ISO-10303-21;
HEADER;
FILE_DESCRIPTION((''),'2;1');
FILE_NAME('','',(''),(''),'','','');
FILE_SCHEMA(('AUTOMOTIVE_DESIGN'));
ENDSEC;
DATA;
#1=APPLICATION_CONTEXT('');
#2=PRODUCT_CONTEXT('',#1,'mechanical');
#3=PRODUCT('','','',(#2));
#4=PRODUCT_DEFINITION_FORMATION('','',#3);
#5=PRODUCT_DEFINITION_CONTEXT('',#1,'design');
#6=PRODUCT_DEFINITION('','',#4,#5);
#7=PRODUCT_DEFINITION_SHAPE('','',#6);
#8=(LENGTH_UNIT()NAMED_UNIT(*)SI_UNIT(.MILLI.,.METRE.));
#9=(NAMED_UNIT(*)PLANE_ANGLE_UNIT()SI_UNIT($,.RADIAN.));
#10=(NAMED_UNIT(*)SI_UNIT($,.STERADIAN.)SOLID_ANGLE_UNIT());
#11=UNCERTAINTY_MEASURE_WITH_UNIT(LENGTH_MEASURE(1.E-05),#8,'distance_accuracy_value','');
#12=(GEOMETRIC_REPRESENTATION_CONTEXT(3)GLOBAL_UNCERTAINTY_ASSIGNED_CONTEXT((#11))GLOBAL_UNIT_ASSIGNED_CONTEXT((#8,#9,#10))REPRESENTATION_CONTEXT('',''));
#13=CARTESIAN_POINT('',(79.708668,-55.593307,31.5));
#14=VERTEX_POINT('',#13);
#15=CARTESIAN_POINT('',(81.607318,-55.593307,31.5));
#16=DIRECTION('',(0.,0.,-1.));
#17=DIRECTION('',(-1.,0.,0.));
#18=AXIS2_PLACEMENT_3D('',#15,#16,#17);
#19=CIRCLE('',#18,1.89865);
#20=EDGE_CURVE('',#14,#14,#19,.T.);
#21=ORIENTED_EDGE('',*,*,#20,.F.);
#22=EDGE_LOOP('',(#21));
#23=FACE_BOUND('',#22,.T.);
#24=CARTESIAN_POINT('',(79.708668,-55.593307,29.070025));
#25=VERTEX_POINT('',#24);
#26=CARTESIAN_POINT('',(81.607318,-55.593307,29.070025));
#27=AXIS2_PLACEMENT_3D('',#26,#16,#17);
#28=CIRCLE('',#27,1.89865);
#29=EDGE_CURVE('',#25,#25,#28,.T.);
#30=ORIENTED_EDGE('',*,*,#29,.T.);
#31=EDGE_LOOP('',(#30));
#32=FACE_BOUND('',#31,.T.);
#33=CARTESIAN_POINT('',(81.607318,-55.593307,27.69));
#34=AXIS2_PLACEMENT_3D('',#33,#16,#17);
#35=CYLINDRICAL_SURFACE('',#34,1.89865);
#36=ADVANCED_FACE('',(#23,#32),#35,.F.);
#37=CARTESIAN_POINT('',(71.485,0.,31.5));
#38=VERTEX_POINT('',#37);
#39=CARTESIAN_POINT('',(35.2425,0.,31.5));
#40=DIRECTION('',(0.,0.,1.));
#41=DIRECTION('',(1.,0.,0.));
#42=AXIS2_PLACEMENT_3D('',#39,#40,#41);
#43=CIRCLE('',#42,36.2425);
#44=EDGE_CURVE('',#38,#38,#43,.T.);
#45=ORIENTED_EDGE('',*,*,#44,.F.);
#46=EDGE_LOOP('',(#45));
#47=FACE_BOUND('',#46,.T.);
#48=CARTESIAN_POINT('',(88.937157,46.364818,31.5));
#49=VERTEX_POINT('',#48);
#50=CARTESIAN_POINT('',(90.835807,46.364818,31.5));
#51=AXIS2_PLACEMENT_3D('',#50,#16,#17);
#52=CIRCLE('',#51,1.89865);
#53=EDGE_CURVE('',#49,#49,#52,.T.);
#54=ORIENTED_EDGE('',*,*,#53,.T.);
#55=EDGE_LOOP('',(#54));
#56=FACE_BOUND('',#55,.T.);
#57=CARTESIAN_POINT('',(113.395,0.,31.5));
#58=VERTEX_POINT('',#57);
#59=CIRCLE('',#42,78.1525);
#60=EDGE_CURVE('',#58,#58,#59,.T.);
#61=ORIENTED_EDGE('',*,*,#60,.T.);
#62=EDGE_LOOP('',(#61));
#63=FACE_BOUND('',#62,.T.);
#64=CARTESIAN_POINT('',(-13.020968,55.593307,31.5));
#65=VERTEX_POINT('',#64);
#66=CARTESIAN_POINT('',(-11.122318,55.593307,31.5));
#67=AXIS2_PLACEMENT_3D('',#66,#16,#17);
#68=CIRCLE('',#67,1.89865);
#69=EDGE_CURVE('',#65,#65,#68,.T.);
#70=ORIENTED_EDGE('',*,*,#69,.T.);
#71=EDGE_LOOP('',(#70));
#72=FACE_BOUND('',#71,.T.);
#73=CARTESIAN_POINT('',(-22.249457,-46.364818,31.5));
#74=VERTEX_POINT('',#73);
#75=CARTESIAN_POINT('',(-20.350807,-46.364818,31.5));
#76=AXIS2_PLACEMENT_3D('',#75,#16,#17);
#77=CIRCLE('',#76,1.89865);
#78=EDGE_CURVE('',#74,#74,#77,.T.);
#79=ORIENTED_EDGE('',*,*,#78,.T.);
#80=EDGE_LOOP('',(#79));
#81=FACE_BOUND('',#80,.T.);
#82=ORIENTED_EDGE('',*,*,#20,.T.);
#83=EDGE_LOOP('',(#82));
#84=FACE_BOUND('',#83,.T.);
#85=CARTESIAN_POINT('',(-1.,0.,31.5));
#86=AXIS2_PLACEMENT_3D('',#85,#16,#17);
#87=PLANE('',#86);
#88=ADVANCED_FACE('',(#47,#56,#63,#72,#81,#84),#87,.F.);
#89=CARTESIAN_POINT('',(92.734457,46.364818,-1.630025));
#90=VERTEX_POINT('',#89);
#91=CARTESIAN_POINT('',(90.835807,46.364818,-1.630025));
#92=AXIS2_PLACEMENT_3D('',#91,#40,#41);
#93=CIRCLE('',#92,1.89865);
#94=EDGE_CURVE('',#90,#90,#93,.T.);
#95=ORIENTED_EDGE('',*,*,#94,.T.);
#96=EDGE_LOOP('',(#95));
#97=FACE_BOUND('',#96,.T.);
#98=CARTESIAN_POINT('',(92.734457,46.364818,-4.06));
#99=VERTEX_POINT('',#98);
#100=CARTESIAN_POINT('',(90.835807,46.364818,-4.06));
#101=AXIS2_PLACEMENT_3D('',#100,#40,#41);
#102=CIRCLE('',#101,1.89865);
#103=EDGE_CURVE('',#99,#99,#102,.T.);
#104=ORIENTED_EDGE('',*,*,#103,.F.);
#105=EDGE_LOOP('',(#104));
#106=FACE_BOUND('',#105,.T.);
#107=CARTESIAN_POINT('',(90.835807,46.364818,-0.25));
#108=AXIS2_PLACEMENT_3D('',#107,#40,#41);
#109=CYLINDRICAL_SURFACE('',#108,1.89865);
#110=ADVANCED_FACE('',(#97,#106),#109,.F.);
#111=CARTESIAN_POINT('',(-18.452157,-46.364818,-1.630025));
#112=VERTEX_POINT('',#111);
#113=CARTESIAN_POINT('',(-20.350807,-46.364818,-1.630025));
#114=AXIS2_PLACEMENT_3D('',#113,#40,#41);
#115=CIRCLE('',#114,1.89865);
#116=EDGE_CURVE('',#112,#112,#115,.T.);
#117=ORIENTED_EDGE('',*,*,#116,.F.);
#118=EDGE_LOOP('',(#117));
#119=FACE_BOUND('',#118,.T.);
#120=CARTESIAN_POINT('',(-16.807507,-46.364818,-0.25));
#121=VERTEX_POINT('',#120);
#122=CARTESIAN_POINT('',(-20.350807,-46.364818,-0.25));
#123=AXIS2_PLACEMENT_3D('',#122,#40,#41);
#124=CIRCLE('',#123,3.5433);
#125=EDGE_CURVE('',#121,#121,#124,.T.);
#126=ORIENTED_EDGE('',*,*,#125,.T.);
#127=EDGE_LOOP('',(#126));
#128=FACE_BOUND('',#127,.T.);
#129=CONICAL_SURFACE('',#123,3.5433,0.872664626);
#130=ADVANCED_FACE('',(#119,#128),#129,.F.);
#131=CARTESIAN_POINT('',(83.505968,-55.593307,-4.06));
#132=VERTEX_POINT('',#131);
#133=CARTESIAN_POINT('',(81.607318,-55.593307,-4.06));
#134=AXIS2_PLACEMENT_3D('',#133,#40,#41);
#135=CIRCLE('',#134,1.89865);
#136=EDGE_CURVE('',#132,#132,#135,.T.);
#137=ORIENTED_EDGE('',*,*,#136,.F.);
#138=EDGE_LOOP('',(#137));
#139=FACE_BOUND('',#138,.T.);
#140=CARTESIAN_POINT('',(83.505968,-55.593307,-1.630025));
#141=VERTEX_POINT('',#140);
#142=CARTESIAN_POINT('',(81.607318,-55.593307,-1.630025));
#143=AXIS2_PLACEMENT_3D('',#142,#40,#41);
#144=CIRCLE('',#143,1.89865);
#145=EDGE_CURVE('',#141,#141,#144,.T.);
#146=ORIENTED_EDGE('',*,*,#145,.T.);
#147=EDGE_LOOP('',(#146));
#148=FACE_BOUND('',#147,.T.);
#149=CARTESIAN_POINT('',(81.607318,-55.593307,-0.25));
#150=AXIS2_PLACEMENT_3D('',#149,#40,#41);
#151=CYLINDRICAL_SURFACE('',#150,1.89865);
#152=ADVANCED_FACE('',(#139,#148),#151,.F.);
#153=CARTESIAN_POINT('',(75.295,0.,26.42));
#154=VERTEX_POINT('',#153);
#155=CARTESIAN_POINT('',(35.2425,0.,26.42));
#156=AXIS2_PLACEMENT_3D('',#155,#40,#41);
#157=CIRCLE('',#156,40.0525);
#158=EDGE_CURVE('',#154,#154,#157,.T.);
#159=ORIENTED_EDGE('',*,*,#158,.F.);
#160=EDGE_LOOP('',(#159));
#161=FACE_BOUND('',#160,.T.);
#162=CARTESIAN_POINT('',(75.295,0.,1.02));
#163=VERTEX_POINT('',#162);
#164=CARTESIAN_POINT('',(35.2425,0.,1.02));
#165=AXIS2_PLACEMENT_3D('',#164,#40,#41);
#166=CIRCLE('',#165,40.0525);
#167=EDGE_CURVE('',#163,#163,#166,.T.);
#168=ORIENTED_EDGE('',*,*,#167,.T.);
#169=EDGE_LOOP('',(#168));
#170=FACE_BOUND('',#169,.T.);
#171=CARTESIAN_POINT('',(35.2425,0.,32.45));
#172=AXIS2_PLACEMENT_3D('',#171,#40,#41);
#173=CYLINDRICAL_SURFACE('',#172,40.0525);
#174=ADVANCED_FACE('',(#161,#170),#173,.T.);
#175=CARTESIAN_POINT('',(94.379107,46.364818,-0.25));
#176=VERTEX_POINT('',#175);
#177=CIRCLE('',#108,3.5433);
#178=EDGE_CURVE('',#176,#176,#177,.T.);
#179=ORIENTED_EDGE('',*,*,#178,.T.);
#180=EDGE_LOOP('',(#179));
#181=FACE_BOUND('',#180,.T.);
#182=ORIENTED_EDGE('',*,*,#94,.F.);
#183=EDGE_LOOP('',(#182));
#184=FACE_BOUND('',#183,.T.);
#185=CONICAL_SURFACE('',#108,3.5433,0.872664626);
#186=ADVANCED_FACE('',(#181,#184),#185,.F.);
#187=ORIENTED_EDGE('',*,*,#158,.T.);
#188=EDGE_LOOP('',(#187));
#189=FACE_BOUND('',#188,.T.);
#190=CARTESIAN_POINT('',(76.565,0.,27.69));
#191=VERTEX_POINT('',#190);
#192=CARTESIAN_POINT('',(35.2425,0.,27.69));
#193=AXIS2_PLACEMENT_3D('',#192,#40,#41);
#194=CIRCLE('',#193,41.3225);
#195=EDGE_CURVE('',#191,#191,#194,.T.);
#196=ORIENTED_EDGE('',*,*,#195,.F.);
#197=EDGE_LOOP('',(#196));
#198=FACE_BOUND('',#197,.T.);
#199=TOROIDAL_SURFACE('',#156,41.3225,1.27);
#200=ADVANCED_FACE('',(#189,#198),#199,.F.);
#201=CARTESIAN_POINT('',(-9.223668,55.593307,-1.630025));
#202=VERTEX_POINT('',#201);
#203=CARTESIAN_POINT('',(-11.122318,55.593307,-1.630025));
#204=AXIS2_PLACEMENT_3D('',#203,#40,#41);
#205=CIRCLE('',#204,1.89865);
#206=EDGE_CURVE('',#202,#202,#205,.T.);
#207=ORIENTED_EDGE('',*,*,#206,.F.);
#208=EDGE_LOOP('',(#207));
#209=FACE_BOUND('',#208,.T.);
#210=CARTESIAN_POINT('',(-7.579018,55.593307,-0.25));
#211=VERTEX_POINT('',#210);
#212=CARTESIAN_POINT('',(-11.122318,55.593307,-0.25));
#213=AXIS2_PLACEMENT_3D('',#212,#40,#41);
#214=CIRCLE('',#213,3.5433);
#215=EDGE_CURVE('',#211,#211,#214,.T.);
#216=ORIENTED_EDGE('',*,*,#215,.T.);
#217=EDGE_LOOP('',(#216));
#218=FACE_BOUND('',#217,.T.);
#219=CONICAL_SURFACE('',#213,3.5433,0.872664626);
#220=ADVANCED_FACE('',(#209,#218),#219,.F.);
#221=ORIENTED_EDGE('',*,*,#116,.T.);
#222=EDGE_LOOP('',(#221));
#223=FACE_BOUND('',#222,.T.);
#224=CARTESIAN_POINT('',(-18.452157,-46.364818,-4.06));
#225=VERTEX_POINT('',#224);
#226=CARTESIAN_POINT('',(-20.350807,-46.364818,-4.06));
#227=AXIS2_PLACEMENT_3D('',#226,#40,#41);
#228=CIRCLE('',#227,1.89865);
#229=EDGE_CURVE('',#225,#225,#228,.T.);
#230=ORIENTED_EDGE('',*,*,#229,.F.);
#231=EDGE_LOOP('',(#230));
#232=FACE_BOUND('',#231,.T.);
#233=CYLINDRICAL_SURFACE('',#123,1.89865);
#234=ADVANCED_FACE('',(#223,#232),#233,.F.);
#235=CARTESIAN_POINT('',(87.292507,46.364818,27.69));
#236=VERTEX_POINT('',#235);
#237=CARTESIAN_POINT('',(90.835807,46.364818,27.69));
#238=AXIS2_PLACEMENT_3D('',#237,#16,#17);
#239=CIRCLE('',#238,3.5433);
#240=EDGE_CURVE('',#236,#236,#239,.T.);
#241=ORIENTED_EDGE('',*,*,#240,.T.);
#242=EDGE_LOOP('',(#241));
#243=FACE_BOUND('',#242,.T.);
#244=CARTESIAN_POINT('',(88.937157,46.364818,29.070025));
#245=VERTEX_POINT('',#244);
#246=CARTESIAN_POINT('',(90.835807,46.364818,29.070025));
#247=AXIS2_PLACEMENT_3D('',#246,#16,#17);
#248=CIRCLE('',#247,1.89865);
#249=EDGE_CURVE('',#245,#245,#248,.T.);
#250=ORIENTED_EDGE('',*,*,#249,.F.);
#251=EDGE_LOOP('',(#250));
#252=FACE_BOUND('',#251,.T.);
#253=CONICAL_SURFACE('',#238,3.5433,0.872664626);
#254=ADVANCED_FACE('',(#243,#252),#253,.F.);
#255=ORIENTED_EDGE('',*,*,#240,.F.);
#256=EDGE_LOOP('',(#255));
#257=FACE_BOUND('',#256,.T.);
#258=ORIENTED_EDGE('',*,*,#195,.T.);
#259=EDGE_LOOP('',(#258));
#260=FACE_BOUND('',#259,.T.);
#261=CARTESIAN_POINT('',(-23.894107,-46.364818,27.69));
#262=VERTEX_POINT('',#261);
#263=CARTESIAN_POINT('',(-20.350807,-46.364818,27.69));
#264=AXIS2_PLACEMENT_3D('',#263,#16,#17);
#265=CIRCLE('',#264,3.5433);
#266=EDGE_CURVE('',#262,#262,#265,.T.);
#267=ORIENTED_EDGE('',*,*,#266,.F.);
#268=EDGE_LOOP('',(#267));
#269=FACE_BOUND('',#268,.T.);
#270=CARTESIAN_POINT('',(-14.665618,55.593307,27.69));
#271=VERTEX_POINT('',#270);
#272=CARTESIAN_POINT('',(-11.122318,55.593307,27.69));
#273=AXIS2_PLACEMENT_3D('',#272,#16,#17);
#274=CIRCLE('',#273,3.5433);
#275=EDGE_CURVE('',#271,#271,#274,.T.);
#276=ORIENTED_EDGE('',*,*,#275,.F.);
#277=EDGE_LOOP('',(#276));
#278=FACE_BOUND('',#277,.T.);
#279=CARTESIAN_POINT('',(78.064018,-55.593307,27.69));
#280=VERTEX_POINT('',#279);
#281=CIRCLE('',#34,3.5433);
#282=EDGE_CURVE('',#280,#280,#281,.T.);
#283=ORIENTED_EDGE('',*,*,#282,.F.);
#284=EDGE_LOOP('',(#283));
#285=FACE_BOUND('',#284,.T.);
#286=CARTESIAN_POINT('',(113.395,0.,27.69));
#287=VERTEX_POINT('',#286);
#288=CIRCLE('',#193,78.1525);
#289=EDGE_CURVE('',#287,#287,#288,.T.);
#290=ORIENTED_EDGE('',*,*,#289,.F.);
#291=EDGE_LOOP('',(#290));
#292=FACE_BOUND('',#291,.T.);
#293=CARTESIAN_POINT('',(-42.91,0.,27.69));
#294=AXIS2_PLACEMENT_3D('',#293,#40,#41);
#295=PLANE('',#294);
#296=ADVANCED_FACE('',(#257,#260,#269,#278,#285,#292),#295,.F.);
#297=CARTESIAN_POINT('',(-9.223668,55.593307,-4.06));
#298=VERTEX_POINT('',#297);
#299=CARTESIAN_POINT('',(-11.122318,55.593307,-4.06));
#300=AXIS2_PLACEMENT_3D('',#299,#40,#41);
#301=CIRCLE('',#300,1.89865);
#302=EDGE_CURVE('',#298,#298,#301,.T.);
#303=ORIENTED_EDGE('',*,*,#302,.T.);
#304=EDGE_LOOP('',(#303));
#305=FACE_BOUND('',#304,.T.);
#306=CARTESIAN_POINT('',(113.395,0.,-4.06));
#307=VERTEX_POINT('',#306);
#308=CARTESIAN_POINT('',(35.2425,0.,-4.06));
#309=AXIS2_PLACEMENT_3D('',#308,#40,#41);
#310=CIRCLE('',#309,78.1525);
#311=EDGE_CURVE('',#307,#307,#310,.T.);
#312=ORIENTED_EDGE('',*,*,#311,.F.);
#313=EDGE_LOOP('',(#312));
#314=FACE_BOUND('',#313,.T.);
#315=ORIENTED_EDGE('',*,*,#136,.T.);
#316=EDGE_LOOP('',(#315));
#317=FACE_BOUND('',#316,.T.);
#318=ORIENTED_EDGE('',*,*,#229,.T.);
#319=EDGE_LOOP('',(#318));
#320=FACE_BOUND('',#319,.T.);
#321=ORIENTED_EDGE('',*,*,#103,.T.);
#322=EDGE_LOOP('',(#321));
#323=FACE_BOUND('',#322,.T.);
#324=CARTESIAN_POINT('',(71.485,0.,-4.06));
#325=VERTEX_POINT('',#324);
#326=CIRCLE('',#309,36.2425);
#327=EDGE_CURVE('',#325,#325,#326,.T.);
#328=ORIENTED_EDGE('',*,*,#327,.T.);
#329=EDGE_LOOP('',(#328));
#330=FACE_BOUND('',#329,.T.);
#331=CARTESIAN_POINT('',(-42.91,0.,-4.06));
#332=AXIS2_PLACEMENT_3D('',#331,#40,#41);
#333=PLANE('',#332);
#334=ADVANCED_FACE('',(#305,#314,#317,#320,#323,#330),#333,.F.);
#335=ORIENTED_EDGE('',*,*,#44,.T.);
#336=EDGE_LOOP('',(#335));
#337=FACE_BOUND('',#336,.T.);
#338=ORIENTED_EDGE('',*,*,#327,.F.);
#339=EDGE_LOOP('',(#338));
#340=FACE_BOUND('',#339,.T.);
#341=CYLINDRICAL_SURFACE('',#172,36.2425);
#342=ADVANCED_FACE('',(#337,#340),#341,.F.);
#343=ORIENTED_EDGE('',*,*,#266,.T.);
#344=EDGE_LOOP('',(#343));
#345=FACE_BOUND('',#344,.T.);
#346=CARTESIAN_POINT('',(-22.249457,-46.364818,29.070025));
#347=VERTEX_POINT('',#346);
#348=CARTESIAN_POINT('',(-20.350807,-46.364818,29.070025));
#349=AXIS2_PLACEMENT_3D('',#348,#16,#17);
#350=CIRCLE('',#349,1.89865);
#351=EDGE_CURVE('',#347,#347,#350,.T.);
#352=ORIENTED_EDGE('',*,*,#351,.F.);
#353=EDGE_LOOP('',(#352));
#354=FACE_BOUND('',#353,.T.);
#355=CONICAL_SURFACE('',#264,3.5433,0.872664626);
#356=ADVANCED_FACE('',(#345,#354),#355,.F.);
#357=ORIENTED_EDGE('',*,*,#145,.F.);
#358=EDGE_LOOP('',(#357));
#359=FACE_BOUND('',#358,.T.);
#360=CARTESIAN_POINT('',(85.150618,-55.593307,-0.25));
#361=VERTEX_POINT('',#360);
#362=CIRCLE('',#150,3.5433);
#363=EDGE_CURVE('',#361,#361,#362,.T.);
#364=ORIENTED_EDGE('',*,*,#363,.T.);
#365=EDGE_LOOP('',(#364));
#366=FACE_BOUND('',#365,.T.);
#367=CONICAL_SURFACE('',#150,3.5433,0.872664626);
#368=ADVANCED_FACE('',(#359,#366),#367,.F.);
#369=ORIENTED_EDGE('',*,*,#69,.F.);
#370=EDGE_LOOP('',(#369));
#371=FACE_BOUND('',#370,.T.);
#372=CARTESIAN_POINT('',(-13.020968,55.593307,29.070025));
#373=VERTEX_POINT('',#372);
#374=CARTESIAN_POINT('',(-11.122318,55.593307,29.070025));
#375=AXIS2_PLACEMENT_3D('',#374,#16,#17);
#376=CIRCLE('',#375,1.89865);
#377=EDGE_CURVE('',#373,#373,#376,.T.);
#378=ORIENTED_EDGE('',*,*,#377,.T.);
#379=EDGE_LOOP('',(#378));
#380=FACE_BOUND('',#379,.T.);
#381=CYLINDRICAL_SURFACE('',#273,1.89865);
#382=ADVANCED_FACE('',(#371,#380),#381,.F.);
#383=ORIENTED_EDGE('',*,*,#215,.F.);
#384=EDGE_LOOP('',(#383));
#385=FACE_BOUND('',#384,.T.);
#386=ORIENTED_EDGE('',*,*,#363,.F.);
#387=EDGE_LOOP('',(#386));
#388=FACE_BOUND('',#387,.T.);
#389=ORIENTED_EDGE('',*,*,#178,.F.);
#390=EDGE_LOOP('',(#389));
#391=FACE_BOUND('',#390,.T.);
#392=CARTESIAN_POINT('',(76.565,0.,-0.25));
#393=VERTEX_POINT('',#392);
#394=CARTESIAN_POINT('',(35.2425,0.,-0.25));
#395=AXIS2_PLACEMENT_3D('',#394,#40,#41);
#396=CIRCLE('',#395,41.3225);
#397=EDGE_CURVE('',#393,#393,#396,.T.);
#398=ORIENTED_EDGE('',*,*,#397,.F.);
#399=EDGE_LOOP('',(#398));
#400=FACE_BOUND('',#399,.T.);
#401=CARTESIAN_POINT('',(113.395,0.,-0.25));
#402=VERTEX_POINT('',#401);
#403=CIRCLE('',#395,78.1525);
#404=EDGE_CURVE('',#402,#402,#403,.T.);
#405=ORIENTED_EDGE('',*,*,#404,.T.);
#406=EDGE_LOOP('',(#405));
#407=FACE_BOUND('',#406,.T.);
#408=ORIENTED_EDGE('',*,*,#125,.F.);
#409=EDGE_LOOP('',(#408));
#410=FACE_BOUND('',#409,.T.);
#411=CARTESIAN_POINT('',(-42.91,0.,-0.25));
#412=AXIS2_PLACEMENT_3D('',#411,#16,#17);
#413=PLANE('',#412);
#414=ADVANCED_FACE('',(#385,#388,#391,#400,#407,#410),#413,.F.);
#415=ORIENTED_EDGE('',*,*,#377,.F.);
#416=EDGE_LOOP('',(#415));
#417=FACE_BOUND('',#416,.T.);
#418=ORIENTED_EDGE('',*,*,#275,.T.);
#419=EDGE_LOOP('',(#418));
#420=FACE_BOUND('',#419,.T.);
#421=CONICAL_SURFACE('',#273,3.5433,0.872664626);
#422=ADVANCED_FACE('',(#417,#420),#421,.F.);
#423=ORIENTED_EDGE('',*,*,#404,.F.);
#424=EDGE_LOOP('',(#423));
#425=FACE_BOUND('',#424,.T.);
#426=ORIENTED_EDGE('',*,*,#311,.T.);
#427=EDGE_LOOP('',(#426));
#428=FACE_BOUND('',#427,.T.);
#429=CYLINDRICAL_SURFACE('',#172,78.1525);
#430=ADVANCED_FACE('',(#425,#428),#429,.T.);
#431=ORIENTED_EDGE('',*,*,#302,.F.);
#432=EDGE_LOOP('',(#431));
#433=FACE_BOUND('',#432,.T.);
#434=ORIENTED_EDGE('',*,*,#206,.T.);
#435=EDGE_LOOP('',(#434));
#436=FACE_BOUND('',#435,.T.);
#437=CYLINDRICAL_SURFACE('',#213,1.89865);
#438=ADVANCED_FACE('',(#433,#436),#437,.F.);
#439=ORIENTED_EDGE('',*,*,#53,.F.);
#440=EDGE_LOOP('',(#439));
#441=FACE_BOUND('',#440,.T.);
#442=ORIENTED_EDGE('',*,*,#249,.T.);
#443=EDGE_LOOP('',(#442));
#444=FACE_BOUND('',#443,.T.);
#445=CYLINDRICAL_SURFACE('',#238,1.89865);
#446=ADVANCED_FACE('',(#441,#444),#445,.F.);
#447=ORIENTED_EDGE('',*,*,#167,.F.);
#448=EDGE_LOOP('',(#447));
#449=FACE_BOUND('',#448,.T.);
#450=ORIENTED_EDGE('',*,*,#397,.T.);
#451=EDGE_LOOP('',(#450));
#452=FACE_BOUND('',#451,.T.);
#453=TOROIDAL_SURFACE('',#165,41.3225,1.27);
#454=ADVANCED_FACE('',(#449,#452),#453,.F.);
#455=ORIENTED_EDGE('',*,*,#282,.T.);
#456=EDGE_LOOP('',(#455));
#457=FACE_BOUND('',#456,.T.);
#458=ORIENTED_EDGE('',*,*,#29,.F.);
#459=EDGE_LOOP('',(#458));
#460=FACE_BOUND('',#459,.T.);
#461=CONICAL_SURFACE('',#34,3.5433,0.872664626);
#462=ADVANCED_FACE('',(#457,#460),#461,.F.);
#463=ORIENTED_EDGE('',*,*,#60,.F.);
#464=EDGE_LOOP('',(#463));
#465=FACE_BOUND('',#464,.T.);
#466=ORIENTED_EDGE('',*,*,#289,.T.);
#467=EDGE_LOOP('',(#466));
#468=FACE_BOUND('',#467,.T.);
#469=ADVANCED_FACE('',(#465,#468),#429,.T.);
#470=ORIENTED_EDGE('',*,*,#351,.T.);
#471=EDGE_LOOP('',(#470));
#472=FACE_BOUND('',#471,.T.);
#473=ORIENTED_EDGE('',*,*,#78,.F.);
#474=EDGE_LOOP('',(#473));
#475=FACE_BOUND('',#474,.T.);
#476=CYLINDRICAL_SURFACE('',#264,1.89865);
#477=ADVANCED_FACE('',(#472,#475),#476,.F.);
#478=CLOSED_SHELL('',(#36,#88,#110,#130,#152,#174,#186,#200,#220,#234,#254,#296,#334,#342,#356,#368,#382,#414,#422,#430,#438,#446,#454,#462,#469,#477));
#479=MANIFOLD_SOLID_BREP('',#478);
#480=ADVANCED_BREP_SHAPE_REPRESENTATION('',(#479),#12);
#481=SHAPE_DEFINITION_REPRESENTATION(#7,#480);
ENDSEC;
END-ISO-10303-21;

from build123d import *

# Parameters (mm, degrees)
SKETCH2_R          = 1.8288
CUT_EXTRUDE1_DEPTH = 143.234851149
CIRPATTERN1_COUNT  = 4


# Read off the part's stored shape, not the designer's step: CSK for #6 Flat Head Machine Screw (100)1
with BuildPart() as part:
    # Sketch1 → Revolve8 (revolve)
    with BuildSketch(Plane(origin=(0, 0, 0), x_dir=(1, 0, 0), z_dir=(0, 1, 0)), mode=Mode.PRIVATE) as revolve8_sk:
        with BuildLine():
            Line((-42.91, 4.059999872), (-1, 4.059999872))
            Line((-1, 4.059999872), (-1, -31.500000128))
            Line((-1, -31.500000128), (-42.91, -31.500000128))
            Line((-42.91, -31.500000128), (-42.91, -27.690000128))
            Line((-42.91, -27.690000128), (-6.08, -27.690000128))
            ThreePointArc((-6.08, -27.690000128), (-5.181974388, -27.31802574), (-4.81, -26.420000128))
            Line((-4.81, -26.420000128), (-4.81, -1.020000128))
            ThreePointArc((-4.81, -1.020000128), (-5.181974388, -0.121974516), (-6.08, 0.249999872))
            Line((-6.08, 0.249999872), (-42.91, 0.249999872))
            Line((-42.91, 0.249999872), (-42.91, 4.059999872))
        make_face()
    revolve(revolve8_sk.sketch.rotate(Axis((35.2425, 0, 32.45), (0, 0, -1)), 180), axis=Axis((35.2425, 0, 32.45), (0, 0, -1)))

    # Sketch2 → Cut-Extrude1 (cut, through all)
    with BuildSketch(Plane(origin=(0, 0, -4.059999872), x_dir=(-1, 0, 0), z_dir=(0, 0, -1))):
        with Locations((11.122317884, 55.593306815)):
            Circle(SKETCH2_R)
    cut_extrude1 = extrude(amount=-CUT_EXTRUDE1_DEPTH, mode=Mode.SUBTRACT)

    # CirPattern1: Cut-Extrude1 ×4 about axis
    cirpattern1_axis = Axis((35.2425, 0, 0), (0, 0, 1))
    for i in range(1, CIRPATTERN1_COUNT):
        add(cut_extrude1.rotate(cirpattern1_axis, i * 360 / CIRPATTERN1_COUNT), mode=Mode.SUBTRACT)

    # CSK for _6 Flat Head Machine Screw _ 2 → CSK for #6 Flat Head Machine Screw (100)1 (revolve, cut)
    with BuildSketch(Plane(origin=(-11.122317884, 55.593306815, 0), x_dir=(1, 0, 0), z_dir=(0, -1, 0))):
        Polygon((1.89865, 29.070025336), (1.89865, 31.500000128), (1.8288, 31.500000128), (1.8288, 27.690000128), (3.5433, 27.690000128), align=None)
        Polygon((1.89865, -1.63002508), (3.5433, -0.249999872), (1.8288, -0.249999872), (1.8288, -4.059999872), (1.89865, -4.059999872), align=None)
    revolve(axis=Axis((-11.122317884, 55.593306815, 0), (0, 0, 1)), mode=Mode.SUBTRACT)

    # CSK for _6 Flat Head Machine Screw _ 3 o → CSK for _6 Flat Head Machine Screw _ 3 (revolve, cut)
    with BuildSketch(Plane(origin=(-20.350806815, -46.364817884, 0), x_dir=(1, 0, 0), z_dir=(0, -1, 0))):
        Polygon((1.89865, 29.070025336), (1.89865, 31.500000128), (1.8288, 31.500000128), (1.8288, 27.690000128), (3.5433, 27.690000128), align=None)
        Polygon((1.89865, -1.63002508), (3.5433, -0.249999872), (1.8288, -0.249999872), (1.8288, -4.059999872), (1.89865, -4.059999872), align=None)
    revolve(axis=Axis((-20.350806815, -46.364817884, 0), (0, 0, 1)), mode=Mode.SUBTRACT)

    # CSK for _6 Flat Head Machine Screw _ 4 o → CSK for _6 Flat Head Machine Screw _ 4 (revolve, cut)
    with BuildSketch(Plane(origin=(81.607317884, -55.593306815, 0), x_dir=(1, 0, 0), z_dir=(0, -1, 0))):
        Polygon((1.89865, 29.070025336), (1.89865, 31.500000128), (1.8288, 31.500000128), (1.8288, 27.690000128), (3.5433, 27.690000128), align=None)
        Polygon((1.89865, -1.63002508), (3.5433, -0.249999872), (1.8288, -0.249999872), (1.8288, -4.059999872), (1.89865, -4.059999872), align=None)
    revolve(axis=Axis((81.607317884, -55.593306815, 0), (0, 0, 1)), mode=Mode.SUBTRACT)

    # CSK for _6 Flat Head Machine Screw _ 5 o → CSK for _6 Flat Head Machine Screw _ 5 (revolve, cut)
    with BuildSketch(Plane(origin=(90.835806815, 46.364817884, 0), x_dir=(1, 0, 0), z_dir=(0, -1, 0))):
        Polygon((1.89865, 29.070025336), (1.89865, 31.500000128), (1.8288, 31.500000128), (1.8288, 27.690000128), (3.5433, 27.690000128), align=None)
        Polygon((1.89865, -1.63002508), (3.5433, -0.249999872), (1.8288, -0.249999872), (1.8288, -4.059999872), (1.89865, -4.059999872), align=None)
    revolve(axis=Axis((90.835806815, 46.364817884, 0), (0, 0, 1)), mode=Mode.SUBTRACT)


solid = part.part
